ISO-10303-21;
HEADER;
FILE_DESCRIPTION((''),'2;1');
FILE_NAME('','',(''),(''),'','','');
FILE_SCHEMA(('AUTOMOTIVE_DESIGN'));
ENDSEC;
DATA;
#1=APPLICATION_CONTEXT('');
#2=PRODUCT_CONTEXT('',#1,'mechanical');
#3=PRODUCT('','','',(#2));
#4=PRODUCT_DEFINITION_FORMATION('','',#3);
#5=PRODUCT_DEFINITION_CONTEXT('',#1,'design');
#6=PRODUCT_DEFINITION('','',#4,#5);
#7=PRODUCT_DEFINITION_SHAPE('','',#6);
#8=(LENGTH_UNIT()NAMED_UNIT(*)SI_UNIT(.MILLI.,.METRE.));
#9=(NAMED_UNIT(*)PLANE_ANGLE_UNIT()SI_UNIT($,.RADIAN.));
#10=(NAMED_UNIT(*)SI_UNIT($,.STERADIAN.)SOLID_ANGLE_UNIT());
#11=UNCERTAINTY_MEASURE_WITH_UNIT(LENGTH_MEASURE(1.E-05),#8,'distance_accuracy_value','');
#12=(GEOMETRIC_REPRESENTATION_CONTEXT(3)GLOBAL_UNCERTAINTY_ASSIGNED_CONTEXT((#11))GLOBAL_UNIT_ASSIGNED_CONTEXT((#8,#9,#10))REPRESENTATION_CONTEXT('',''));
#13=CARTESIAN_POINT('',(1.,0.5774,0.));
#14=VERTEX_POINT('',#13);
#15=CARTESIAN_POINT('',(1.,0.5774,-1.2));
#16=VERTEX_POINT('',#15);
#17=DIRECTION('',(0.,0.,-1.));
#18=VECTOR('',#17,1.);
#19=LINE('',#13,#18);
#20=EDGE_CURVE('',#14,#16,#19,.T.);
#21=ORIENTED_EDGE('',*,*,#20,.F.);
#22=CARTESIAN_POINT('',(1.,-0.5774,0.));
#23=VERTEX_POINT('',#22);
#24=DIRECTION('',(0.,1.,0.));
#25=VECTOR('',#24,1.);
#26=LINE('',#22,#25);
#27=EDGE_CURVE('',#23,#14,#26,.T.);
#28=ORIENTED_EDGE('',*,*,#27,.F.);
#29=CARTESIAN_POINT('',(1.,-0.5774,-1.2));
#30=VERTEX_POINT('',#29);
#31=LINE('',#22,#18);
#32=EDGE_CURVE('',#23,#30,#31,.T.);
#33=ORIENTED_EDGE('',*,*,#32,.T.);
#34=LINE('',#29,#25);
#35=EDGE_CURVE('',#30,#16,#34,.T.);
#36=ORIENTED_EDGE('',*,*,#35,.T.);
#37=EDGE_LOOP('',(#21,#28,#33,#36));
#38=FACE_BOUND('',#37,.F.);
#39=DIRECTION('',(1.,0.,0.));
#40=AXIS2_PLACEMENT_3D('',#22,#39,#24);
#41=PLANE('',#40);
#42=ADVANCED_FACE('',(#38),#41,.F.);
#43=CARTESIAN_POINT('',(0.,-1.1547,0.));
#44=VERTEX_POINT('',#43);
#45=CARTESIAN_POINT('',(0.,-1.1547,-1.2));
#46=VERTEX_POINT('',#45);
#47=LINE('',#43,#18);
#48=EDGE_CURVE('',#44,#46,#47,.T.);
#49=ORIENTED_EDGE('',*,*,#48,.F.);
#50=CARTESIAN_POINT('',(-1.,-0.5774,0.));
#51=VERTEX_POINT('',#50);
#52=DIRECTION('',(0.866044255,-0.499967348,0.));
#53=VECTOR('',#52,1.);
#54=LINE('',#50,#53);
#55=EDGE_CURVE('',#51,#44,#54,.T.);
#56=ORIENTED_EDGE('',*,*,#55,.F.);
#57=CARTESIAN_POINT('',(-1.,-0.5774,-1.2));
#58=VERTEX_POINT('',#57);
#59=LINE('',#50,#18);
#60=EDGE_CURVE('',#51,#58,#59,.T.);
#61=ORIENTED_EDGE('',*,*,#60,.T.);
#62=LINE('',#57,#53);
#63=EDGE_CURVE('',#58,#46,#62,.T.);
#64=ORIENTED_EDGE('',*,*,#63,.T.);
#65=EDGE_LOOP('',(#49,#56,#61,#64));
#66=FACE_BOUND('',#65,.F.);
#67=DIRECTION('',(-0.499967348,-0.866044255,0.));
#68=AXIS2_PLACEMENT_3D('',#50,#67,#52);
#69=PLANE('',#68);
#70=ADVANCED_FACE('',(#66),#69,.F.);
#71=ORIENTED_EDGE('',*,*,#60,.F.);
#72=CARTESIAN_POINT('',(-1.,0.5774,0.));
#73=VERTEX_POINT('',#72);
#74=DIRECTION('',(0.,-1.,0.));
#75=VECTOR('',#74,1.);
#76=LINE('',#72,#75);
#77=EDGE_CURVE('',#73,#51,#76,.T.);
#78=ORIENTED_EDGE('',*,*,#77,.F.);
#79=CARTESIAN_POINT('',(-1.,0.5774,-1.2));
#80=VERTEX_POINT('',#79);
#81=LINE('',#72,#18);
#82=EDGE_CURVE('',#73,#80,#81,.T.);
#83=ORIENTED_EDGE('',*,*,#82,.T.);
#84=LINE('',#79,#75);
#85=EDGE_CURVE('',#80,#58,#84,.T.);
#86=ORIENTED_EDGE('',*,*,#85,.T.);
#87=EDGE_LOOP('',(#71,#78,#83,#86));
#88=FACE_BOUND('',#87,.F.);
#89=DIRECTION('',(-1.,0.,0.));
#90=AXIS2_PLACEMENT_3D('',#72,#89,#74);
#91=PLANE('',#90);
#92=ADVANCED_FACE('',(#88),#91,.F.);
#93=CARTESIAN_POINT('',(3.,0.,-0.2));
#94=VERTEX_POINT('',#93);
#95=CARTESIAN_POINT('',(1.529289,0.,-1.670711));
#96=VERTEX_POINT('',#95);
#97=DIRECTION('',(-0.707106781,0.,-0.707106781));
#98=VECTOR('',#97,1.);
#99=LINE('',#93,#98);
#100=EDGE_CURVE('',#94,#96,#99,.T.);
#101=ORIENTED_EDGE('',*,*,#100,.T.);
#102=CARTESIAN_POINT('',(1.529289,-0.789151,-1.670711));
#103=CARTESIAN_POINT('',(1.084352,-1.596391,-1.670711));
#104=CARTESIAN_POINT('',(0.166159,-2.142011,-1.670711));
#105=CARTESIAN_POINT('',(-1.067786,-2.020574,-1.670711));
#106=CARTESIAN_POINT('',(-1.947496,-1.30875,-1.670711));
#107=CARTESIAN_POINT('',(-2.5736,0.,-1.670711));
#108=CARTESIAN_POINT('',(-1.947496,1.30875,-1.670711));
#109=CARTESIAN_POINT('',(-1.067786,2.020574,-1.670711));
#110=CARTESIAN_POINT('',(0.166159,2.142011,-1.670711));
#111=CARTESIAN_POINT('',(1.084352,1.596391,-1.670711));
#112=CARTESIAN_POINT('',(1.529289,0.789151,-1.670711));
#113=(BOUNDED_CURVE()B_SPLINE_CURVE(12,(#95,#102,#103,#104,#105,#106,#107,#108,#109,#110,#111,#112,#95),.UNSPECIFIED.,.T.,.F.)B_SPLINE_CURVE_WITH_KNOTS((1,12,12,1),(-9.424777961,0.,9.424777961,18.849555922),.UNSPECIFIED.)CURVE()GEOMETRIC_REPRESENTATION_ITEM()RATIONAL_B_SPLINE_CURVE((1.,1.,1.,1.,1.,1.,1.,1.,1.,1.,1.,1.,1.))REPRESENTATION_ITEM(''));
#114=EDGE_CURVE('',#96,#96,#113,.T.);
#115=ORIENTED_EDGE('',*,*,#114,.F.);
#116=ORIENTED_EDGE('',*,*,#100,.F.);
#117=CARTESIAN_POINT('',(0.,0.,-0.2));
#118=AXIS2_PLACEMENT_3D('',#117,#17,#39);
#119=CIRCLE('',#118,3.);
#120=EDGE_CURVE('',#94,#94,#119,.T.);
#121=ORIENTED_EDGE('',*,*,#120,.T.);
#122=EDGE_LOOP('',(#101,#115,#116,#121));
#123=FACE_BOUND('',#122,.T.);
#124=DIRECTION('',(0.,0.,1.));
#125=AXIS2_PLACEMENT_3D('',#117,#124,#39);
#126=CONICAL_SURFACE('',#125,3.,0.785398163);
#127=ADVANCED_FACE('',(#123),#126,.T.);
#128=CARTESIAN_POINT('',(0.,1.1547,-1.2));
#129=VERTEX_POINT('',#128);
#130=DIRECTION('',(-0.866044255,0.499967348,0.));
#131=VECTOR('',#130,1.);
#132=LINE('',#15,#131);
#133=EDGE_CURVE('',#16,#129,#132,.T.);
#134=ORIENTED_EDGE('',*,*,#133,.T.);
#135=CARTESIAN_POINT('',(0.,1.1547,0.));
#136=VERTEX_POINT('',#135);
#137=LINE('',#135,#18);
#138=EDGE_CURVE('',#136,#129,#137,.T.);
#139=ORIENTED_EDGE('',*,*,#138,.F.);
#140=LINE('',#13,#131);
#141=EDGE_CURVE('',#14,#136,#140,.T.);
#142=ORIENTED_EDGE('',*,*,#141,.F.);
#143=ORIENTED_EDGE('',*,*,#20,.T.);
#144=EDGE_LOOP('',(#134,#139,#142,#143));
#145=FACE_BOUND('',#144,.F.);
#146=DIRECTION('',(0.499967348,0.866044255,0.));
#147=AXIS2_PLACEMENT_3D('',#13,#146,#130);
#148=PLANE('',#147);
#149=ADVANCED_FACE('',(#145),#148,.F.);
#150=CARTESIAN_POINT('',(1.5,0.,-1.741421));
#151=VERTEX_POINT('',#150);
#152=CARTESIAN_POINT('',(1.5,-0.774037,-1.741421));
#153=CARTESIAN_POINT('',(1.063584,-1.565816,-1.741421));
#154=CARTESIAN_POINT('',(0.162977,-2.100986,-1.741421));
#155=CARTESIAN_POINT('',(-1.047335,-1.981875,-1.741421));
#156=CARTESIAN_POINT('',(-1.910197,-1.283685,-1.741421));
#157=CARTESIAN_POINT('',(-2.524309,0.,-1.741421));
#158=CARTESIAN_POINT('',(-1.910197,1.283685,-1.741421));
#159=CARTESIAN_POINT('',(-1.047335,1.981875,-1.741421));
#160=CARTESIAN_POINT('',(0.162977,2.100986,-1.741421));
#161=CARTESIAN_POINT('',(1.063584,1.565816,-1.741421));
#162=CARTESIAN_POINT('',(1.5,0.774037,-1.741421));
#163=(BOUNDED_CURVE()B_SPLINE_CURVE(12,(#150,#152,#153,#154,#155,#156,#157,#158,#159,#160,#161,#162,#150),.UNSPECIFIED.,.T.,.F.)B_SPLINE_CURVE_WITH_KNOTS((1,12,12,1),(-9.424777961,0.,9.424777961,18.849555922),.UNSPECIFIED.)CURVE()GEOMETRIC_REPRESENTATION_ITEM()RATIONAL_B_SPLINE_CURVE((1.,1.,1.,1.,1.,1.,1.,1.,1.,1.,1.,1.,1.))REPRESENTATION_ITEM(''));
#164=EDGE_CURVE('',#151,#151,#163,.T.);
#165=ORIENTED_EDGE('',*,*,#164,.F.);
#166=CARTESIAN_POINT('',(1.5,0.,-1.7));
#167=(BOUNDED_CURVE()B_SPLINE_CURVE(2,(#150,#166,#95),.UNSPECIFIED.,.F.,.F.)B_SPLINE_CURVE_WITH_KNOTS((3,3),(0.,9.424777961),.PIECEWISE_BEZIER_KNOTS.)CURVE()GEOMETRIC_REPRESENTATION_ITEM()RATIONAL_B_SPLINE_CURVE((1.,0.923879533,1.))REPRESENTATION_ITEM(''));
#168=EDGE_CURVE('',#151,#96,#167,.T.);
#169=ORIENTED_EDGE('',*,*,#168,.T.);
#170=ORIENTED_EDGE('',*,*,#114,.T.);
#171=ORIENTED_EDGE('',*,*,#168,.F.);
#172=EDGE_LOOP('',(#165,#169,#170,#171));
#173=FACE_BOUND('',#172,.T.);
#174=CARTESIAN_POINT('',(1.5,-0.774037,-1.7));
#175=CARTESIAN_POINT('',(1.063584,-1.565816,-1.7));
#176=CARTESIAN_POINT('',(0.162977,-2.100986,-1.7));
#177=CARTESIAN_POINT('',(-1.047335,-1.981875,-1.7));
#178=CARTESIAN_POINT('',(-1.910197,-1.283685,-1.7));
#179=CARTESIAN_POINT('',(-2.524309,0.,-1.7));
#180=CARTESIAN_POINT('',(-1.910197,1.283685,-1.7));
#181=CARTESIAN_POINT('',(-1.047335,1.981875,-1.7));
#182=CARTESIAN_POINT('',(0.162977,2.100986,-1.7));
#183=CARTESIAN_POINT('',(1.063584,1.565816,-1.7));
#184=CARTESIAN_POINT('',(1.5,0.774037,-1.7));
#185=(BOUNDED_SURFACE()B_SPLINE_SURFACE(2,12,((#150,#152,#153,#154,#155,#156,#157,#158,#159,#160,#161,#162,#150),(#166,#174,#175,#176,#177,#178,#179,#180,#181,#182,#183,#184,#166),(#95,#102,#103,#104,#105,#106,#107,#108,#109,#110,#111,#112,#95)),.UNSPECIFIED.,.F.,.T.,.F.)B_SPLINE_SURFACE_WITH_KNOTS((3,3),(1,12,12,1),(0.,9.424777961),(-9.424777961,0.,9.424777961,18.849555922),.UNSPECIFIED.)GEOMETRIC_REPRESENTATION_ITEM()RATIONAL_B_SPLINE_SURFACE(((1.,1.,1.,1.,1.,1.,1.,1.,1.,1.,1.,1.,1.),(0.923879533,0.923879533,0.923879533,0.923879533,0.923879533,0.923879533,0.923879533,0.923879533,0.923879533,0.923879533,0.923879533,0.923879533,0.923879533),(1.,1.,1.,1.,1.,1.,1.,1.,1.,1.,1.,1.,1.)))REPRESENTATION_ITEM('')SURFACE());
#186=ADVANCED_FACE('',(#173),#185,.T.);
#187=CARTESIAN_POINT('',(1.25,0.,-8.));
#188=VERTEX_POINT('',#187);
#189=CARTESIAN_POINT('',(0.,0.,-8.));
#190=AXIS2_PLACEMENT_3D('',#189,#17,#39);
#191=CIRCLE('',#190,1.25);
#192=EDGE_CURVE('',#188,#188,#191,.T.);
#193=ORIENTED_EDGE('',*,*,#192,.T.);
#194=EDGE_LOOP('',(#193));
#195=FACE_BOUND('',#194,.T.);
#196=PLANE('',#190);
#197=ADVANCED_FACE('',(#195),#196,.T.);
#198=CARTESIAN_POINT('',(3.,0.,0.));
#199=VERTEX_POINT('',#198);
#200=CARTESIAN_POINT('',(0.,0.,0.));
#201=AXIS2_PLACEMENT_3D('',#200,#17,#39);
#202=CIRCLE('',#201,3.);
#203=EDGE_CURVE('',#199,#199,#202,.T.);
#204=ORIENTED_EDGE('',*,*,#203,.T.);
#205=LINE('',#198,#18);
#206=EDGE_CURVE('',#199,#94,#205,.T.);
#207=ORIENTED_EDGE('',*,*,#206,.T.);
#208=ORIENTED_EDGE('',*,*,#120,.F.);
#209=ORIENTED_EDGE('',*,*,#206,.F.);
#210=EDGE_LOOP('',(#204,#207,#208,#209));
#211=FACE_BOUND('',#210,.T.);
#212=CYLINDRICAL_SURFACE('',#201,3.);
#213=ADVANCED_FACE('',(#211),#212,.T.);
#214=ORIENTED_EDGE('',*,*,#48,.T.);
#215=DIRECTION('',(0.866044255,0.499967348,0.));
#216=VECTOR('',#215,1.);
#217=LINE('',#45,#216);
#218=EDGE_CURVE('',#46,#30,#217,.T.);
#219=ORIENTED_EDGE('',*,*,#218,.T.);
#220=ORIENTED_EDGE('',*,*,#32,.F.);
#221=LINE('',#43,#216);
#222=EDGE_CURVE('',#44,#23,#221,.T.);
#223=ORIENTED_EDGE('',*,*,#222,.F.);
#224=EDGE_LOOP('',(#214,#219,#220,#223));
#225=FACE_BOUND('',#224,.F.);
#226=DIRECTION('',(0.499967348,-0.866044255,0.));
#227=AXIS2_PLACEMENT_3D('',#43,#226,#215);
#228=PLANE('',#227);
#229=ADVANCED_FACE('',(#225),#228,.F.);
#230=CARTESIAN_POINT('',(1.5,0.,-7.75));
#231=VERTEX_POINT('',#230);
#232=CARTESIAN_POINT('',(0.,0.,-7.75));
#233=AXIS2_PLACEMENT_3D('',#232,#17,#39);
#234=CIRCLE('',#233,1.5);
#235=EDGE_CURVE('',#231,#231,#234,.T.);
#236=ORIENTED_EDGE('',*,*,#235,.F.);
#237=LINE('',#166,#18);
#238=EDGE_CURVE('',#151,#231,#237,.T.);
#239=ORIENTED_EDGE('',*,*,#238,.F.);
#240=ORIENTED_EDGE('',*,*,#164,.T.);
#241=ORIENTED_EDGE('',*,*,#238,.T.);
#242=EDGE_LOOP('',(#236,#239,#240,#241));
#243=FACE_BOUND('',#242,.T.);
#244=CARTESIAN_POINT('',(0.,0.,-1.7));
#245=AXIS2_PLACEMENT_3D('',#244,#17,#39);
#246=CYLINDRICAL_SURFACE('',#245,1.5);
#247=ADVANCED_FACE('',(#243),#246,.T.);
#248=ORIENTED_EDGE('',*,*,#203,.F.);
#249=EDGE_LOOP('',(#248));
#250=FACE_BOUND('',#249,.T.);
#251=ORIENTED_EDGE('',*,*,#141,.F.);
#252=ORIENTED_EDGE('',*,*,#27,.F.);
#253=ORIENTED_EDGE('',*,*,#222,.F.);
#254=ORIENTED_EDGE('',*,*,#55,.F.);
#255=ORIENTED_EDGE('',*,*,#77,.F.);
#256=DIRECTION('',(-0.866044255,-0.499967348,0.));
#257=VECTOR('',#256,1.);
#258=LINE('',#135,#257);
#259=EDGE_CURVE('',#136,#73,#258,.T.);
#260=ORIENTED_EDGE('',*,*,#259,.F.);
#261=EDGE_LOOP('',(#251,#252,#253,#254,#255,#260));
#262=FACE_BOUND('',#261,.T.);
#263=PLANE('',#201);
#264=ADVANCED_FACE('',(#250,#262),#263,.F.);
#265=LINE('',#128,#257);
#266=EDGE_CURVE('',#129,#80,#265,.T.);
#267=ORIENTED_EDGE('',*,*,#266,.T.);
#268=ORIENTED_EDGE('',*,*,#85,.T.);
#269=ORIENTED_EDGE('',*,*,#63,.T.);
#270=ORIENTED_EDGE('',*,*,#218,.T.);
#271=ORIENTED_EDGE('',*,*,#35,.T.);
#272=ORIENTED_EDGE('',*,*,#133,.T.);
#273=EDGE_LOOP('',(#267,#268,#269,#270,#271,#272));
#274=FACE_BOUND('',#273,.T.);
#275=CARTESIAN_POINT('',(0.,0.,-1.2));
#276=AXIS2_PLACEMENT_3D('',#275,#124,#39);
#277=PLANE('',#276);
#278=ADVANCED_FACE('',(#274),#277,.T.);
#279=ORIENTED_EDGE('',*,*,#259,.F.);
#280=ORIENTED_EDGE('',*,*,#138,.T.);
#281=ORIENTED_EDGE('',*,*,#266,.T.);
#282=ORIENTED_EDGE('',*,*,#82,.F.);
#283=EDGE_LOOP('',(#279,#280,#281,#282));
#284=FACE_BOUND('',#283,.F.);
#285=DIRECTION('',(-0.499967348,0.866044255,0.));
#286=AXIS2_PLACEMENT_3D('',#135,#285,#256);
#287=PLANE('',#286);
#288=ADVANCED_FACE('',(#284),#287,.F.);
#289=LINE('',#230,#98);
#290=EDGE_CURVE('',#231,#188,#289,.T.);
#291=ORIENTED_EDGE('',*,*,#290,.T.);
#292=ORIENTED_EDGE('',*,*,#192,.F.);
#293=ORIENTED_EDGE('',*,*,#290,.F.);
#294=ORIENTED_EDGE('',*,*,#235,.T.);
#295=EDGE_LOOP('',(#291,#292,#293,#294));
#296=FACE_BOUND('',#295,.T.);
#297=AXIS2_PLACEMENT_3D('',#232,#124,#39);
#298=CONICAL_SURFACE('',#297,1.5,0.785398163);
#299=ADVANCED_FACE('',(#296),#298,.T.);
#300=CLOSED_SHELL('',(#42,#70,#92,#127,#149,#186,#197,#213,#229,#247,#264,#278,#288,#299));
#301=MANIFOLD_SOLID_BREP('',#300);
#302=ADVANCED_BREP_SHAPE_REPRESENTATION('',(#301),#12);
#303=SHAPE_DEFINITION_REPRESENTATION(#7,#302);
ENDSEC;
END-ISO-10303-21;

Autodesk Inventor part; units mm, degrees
ref_plane "YZ Plane" through (0, 0, 0) normal (1, 0, 0) x (0, 1, 0)
sketch "Sketch1" plane through (0, 0, 0) normal (0, 1, 0) x (-1, 0, 0)
  point P0 (0, 0)
sketch "Sketch2" plane through (0, 0, 0) normal (0, 1, 0) x (-1, 0, 0)
  line L0 (-1.5, -8) -> (0, -8)
  line L1 (-1.5, -1.7) -> (-1.5, -8)
  line L2 (-3, -0.2) -> (-1.5, -1.7)
  line L3 (-3, 0) -> (-3, -0.2)
  line L4 (0, 0) -> (-3, 0)
  line L5 (0, -8) -> (0, 0)
  line L6 (0, -8) -> (0, 0)
  line L7 (0, -9.6) -> (0, 1.6) projected
  line L8 (0.6, 0) -> (-3.6, 0) projected
  dimension "d3" = 3
  dimension "d5" = 1.5
  dimension "d7" = 8
  dimension "ParC" = 0.2
  dimension "d22" = 0
  dimension "d23" = 0
  dimension "d43" = 45
revolve "Revolution1" add sketch "Sketch2" angle 360 about axis through (0, 0, -8) along (0, 0, -1)
sketch "Sketch3" plane through (0, 0, 0) normal (0, 0, 1) x (1, 0, 0)
  line L0 (-1, 0.5774) -> (-1, -0.5774)
  line L1 (0, 1.1547) -> (-1, 0.5774)
  line L2 (1, 0.5774) -> (0, 1.1547)
  line L3 (1, -0.5774) -> (1, 0.5774)
  line L4 (0, -1.1547) -> (1, -0.5774)
  line L5 (-1, -0.5774) -> (0, -1.1547)
  circle A0 centre (0, 0) radius 1 construction
  circle A1 centre (0, 0) radius 1.5 construction
  dimension "d11" = 2
  dimension "d13" = 120
  dimension "d15" = 120
extrude "Extrusion1" cut sketch "Sketch3" against normal blind 1.2
fillet "Fillet1" radius 0.1 1 edges at (-1.5, 0, -1.7)
chamfer "Chamfer1" distance 0.25 angle 45 1 edges at (-1.5, 0, -8) measured on face at (1.4041, 0.5277, -5.9138)
thread "Thread1" size "M3x0.5" class "6g" standard "ISO Metric profile" length 5.3
ref_plane "MSC_PF1" through (0, 0, 0) normal (1, 0, 0) x (0, 1, 0)
ref_plane "MSC_PT1" through (0, 0, 0) normal (0, 0, -1) x (-1, 0, 0)
equation "\"d18\" = r"
equation "\"d19\" = 0.5 * PTC"
equation "\"d39\" = 0.5 * PTC"
equation "\"d3\" = 0.5 * dk"
equation "\"d5\" = 0.5 * NND"
equation "\"d7\" = NLG"
equation "\"d43\" = 0.5 * ang"
equation "\"d11\" = ParS"
equation "\"d16\" = ParT"
equation "\"NND\" = 3"
equation "\"PTC\" = 0.5"
equation "\"dk\" = 6"
equation "\"ParK\" = 1.7"
equation "\"ParS\" = 2"
equation "\"ParT\" = 1.2"
equation "\"r\" = 0.1"
equation "\"NLG\" = 8"
equation "\"ang\" = 90deg"
equation "\"THREADDIA\" = NND"
properties part number "DIN 7991 - M3x8" material "Steel, Mild"
